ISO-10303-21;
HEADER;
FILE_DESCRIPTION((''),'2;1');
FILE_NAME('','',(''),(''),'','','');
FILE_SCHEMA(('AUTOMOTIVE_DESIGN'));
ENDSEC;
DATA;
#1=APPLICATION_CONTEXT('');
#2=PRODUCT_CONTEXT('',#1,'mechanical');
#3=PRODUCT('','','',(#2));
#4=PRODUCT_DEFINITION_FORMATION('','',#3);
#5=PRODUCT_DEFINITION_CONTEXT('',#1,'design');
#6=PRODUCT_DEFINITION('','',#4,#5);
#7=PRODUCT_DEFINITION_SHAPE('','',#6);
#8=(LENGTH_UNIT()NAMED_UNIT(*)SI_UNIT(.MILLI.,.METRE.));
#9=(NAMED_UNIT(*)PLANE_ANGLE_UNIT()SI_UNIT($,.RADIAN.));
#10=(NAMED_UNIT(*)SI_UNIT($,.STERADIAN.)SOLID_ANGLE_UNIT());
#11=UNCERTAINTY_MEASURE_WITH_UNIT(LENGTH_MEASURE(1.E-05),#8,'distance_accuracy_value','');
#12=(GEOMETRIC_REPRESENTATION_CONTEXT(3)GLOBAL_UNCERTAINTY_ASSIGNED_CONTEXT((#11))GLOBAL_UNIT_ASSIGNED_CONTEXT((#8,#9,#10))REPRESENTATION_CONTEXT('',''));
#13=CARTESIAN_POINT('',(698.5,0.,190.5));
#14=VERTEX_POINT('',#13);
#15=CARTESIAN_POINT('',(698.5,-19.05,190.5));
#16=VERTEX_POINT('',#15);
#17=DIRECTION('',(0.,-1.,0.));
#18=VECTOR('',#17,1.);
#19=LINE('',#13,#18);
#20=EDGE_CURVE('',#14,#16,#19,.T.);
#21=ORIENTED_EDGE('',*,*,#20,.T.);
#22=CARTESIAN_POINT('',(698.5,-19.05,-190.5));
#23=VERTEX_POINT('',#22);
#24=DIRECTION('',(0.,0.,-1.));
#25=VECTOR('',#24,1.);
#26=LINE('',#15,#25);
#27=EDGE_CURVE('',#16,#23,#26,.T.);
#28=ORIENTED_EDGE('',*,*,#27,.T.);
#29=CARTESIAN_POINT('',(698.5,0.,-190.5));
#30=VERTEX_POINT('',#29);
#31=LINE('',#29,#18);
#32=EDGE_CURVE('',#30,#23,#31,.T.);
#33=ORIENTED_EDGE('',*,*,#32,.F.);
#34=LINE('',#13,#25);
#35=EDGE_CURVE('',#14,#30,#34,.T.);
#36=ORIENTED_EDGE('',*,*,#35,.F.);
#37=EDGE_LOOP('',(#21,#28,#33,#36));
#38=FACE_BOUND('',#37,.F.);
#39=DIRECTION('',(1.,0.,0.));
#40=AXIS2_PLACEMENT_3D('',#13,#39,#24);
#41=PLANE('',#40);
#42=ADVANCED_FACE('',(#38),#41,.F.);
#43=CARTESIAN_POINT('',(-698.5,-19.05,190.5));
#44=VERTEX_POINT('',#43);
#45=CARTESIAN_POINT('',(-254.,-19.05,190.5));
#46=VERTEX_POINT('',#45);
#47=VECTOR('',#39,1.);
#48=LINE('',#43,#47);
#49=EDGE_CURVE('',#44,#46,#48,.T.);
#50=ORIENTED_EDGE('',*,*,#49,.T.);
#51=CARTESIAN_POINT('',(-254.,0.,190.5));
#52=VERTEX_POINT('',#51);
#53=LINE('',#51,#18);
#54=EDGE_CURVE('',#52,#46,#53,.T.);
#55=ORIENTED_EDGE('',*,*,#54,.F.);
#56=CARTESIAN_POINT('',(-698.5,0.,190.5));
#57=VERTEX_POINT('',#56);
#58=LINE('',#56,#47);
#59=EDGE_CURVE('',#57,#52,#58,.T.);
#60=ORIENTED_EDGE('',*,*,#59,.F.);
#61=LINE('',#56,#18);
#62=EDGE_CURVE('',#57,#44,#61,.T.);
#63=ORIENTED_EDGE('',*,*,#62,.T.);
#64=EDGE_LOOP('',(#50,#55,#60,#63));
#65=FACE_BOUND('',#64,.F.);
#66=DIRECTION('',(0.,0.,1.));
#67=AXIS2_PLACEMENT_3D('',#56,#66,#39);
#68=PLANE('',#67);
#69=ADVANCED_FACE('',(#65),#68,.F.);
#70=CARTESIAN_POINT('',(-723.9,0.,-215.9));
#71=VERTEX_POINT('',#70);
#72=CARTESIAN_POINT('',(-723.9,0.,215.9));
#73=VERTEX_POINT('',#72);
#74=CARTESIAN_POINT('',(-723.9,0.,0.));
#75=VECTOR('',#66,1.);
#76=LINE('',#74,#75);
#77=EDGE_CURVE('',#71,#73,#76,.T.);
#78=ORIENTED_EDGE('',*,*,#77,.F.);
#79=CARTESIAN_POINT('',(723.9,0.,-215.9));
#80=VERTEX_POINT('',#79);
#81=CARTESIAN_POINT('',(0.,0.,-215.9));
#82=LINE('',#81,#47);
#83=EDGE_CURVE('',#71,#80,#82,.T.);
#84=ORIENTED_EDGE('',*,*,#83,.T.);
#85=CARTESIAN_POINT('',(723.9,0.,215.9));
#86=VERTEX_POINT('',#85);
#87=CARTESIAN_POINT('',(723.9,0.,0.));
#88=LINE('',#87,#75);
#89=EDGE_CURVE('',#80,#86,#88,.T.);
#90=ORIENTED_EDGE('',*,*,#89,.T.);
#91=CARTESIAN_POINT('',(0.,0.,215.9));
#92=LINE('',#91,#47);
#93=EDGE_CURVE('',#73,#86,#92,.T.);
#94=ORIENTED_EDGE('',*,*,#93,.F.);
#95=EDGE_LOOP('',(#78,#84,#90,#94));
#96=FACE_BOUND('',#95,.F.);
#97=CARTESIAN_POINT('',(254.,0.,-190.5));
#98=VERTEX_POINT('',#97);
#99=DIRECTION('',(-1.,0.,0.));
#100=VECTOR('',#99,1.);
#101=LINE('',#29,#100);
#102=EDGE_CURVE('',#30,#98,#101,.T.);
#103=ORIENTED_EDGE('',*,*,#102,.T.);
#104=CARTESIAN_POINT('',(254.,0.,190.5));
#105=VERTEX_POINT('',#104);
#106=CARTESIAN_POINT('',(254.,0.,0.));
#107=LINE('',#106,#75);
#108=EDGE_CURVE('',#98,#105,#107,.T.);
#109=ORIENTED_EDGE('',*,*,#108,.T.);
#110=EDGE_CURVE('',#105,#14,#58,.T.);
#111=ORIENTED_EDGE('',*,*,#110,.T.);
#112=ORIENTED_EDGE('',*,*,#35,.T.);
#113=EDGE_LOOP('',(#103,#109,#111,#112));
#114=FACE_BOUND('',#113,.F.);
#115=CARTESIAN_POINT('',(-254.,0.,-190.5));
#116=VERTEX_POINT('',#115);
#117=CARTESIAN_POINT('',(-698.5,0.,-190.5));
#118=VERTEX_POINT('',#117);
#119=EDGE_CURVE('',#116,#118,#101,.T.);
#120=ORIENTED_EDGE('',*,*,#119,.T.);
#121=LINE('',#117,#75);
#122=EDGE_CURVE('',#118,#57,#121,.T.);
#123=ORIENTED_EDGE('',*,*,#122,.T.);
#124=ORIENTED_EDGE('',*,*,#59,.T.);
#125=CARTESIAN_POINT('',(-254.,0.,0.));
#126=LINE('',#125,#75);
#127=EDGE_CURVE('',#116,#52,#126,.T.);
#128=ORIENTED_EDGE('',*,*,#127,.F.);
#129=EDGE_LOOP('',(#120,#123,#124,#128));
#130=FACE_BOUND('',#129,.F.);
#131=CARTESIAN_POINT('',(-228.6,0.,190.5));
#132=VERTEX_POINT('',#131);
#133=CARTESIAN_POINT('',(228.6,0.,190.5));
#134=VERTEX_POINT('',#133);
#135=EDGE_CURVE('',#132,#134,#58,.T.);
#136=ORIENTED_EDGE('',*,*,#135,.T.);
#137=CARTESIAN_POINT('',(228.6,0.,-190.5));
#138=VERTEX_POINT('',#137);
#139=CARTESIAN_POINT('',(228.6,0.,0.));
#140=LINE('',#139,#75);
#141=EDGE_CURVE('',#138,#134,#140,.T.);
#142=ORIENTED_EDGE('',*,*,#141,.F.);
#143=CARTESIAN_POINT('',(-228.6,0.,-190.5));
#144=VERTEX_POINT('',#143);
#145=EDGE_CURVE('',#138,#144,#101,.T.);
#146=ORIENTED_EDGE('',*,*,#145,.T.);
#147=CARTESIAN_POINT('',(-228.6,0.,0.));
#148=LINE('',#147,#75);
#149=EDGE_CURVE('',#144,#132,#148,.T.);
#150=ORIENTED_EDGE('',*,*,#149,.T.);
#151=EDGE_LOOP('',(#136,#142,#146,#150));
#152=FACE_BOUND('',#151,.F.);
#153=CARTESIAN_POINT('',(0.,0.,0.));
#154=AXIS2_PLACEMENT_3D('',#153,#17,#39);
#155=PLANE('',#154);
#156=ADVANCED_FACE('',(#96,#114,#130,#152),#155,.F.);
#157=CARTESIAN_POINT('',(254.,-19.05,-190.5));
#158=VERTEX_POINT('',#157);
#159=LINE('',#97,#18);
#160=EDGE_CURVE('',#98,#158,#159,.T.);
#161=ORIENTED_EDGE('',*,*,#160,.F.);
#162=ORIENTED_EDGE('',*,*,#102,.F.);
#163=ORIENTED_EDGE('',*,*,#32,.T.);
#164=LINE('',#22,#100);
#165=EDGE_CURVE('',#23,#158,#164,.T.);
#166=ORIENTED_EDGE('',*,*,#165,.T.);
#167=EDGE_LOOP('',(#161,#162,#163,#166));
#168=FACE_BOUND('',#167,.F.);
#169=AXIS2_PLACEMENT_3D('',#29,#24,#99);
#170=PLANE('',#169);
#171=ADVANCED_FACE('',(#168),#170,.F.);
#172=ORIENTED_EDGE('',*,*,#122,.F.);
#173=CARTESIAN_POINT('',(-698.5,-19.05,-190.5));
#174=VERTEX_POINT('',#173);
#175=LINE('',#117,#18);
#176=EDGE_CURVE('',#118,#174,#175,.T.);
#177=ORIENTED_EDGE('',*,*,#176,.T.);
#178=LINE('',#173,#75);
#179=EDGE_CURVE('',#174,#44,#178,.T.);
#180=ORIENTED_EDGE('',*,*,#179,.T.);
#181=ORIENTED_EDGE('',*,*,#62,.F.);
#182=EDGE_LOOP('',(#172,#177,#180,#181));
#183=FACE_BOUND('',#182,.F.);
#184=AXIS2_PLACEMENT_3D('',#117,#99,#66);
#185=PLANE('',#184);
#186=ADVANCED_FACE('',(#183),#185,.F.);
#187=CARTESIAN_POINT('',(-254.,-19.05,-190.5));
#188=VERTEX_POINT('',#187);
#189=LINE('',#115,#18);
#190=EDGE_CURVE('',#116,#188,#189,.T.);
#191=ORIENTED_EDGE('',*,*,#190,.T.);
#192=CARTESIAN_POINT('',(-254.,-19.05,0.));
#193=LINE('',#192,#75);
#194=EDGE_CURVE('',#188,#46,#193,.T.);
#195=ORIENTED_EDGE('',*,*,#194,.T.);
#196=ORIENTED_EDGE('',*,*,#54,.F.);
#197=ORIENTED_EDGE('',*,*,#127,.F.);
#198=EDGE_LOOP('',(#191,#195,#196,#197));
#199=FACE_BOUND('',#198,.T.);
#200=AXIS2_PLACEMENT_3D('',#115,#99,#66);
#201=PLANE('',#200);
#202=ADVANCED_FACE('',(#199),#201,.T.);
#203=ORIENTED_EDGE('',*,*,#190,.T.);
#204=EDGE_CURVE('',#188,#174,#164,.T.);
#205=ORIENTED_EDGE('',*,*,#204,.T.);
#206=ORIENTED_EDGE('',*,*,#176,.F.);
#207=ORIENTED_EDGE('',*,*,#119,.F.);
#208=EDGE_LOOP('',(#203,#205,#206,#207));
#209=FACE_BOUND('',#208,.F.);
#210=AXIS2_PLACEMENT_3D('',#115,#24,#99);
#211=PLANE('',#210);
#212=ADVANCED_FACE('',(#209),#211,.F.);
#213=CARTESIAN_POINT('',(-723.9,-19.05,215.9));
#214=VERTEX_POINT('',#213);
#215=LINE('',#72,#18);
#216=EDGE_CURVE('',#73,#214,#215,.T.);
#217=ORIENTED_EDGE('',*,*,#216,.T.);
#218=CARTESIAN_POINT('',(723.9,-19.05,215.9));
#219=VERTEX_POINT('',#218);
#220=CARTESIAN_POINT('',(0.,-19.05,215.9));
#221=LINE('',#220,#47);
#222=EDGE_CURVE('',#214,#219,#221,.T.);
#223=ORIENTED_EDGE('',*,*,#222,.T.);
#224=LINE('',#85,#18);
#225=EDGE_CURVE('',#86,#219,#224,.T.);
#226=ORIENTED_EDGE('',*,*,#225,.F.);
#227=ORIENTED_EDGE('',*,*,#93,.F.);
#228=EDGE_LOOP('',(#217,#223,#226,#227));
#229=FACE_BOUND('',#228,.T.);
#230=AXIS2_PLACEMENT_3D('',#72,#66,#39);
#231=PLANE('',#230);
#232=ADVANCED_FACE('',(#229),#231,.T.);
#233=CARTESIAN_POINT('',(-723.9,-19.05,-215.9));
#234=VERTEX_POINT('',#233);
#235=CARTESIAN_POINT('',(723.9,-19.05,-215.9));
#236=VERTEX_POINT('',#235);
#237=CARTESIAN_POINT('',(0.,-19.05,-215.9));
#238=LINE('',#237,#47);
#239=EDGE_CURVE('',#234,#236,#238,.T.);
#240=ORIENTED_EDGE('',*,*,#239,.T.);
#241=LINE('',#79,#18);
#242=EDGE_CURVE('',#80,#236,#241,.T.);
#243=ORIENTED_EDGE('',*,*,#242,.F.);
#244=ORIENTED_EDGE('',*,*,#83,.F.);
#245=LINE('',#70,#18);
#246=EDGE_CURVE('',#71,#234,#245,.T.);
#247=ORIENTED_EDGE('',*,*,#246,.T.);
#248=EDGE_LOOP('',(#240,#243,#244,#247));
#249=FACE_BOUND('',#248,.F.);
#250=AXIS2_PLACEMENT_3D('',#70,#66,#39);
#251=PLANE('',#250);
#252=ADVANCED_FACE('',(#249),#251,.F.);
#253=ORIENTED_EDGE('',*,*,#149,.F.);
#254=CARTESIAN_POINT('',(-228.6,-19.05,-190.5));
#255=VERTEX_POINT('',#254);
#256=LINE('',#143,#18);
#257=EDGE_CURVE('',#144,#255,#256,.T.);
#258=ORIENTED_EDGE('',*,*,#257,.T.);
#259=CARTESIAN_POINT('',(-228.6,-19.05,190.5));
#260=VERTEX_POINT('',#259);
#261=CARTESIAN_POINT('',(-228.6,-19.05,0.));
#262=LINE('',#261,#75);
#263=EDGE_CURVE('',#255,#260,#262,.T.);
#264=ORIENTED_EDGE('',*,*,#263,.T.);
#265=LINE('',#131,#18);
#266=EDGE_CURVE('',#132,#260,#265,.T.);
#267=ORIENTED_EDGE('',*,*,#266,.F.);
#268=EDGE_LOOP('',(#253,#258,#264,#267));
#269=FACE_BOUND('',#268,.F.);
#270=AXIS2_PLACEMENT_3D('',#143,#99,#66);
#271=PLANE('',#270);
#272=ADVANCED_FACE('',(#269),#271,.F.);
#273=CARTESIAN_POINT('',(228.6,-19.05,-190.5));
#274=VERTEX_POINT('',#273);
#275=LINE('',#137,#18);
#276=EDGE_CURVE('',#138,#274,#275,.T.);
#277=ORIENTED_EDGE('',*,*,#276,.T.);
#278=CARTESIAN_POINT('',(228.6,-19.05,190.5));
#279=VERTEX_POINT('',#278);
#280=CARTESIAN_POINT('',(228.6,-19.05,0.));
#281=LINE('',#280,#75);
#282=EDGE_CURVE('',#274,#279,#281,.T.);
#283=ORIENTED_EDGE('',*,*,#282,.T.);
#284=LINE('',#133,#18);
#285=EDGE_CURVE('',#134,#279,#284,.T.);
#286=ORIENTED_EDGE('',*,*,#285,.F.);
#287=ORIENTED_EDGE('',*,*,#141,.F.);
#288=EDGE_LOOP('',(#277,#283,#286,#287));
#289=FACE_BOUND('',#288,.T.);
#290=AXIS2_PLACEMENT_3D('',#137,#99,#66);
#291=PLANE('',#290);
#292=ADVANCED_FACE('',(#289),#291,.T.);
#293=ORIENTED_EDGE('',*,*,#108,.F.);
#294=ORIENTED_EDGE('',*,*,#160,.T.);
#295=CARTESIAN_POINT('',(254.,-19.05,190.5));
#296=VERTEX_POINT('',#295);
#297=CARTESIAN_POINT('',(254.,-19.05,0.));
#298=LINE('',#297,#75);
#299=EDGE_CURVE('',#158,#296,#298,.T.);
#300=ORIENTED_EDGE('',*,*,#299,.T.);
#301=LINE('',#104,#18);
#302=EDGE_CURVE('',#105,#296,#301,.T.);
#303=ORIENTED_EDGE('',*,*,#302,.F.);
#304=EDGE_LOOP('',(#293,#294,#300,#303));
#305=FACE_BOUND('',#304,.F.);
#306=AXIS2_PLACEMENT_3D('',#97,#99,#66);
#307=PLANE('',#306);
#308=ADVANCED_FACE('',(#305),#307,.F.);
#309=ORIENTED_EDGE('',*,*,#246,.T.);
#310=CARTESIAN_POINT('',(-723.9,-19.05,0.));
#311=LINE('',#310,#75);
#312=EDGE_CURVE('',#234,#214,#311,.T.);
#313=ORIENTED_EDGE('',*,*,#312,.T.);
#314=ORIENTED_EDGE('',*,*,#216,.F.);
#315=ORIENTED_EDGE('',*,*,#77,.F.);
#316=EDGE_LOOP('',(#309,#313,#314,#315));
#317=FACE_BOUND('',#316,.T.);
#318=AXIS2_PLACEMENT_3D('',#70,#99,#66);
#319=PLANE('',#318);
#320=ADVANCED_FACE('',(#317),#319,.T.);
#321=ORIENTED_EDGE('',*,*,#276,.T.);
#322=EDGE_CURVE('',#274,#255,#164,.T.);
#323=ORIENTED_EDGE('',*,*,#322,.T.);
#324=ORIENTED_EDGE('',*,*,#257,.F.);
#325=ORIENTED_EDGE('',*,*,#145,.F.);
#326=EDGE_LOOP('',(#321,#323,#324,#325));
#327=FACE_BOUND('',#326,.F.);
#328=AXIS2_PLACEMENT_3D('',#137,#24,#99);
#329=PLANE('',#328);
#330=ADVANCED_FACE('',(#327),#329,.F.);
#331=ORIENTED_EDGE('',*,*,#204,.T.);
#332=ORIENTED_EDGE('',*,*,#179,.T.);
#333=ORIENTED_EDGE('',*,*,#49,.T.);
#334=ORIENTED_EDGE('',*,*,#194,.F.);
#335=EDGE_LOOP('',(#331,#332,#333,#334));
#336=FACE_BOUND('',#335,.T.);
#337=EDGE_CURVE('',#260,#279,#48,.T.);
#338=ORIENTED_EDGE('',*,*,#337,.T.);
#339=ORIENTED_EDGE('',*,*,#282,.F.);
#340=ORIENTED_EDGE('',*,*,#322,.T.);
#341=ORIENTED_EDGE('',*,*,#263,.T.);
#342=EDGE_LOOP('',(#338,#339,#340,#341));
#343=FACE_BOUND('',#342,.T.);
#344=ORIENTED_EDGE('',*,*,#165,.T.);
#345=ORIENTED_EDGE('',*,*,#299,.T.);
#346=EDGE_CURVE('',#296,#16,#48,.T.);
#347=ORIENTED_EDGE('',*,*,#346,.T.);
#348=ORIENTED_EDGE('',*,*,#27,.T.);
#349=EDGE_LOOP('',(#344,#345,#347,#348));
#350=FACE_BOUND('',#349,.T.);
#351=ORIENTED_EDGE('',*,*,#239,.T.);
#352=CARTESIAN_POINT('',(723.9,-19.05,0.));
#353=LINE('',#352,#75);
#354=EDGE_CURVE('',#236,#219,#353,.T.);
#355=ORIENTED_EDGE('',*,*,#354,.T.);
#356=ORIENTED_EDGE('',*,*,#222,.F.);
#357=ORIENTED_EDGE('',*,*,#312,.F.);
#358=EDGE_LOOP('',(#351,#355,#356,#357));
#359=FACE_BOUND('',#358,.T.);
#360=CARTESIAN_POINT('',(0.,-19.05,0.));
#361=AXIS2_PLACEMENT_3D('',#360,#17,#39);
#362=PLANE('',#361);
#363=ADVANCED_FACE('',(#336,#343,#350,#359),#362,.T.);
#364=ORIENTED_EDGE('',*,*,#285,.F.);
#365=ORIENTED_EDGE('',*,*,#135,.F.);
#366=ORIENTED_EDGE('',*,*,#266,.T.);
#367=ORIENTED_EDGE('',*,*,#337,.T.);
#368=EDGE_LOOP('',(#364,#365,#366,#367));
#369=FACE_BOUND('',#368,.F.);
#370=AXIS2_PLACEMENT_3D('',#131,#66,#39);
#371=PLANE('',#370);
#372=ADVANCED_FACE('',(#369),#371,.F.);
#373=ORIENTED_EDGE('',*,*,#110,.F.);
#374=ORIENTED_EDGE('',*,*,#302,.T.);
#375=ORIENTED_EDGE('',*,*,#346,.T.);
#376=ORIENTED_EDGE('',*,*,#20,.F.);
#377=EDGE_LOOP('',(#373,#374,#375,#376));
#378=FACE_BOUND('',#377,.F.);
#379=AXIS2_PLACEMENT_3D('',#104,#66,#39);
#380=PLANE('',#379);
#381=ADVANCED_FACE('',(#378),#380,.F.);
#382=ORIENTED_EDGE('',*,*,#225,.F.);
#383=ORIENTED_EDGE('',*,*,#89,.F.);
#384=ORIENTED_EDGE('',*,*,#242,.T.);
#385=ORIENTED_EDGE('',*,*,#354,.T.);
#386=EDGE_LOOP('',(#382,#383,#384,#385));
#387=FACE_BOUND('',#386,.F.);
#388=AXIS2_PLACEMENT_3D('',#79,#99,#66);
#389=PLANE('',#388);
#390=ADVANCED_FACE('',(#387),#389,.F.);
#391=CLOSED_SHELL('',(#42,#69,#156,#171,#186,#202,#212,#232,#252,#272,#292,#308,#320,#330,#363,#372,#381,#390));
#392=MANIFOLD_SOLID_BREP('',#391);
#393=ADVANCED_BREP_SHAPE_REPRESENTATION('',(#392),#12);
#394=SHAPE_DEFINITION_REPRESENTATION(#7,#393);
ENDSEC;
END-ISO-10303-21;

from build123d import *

# Parameters (mm, degrees)
F1_W     = 1447.8
F1_H     = 431.8
F1_W_2   = 25.4
F1_H_2   = 381
F2_DEPTH = 19.05


# Not quite as in the source:
# - a variable given as a bare number and used for a length is read in inches; the dataset says mm whatever the document's units were


with BuildPart() as f2:
    # F1 (on Front) → F2 (new body)
    with BuildSketch(Plane.XZ):
        Rectangle(F1_W, F1_H)
        Polygon((-698.5, -190.5), (-698.5, 190.5), (-254, 190.5), (-228.6, 190.5), (228.6, 190.5), (254, 190.5), (698.5, 190.5), (698.5, -190.5), (254, -190.5), (228.6, -190.5), (-228.6, -190.5), (-254, -190.5), align=None, mode=Mode.SUBTRACT)
        with Locations((-241.3, 0)):
            Rectangle(F1_W_2, F1_H_2)
        with Locations((241.3, 0)):
            Rectangle(F1_W_2, F1_H_2)
    extrude(amount=F2_DEPTH)


solid = f2.part
